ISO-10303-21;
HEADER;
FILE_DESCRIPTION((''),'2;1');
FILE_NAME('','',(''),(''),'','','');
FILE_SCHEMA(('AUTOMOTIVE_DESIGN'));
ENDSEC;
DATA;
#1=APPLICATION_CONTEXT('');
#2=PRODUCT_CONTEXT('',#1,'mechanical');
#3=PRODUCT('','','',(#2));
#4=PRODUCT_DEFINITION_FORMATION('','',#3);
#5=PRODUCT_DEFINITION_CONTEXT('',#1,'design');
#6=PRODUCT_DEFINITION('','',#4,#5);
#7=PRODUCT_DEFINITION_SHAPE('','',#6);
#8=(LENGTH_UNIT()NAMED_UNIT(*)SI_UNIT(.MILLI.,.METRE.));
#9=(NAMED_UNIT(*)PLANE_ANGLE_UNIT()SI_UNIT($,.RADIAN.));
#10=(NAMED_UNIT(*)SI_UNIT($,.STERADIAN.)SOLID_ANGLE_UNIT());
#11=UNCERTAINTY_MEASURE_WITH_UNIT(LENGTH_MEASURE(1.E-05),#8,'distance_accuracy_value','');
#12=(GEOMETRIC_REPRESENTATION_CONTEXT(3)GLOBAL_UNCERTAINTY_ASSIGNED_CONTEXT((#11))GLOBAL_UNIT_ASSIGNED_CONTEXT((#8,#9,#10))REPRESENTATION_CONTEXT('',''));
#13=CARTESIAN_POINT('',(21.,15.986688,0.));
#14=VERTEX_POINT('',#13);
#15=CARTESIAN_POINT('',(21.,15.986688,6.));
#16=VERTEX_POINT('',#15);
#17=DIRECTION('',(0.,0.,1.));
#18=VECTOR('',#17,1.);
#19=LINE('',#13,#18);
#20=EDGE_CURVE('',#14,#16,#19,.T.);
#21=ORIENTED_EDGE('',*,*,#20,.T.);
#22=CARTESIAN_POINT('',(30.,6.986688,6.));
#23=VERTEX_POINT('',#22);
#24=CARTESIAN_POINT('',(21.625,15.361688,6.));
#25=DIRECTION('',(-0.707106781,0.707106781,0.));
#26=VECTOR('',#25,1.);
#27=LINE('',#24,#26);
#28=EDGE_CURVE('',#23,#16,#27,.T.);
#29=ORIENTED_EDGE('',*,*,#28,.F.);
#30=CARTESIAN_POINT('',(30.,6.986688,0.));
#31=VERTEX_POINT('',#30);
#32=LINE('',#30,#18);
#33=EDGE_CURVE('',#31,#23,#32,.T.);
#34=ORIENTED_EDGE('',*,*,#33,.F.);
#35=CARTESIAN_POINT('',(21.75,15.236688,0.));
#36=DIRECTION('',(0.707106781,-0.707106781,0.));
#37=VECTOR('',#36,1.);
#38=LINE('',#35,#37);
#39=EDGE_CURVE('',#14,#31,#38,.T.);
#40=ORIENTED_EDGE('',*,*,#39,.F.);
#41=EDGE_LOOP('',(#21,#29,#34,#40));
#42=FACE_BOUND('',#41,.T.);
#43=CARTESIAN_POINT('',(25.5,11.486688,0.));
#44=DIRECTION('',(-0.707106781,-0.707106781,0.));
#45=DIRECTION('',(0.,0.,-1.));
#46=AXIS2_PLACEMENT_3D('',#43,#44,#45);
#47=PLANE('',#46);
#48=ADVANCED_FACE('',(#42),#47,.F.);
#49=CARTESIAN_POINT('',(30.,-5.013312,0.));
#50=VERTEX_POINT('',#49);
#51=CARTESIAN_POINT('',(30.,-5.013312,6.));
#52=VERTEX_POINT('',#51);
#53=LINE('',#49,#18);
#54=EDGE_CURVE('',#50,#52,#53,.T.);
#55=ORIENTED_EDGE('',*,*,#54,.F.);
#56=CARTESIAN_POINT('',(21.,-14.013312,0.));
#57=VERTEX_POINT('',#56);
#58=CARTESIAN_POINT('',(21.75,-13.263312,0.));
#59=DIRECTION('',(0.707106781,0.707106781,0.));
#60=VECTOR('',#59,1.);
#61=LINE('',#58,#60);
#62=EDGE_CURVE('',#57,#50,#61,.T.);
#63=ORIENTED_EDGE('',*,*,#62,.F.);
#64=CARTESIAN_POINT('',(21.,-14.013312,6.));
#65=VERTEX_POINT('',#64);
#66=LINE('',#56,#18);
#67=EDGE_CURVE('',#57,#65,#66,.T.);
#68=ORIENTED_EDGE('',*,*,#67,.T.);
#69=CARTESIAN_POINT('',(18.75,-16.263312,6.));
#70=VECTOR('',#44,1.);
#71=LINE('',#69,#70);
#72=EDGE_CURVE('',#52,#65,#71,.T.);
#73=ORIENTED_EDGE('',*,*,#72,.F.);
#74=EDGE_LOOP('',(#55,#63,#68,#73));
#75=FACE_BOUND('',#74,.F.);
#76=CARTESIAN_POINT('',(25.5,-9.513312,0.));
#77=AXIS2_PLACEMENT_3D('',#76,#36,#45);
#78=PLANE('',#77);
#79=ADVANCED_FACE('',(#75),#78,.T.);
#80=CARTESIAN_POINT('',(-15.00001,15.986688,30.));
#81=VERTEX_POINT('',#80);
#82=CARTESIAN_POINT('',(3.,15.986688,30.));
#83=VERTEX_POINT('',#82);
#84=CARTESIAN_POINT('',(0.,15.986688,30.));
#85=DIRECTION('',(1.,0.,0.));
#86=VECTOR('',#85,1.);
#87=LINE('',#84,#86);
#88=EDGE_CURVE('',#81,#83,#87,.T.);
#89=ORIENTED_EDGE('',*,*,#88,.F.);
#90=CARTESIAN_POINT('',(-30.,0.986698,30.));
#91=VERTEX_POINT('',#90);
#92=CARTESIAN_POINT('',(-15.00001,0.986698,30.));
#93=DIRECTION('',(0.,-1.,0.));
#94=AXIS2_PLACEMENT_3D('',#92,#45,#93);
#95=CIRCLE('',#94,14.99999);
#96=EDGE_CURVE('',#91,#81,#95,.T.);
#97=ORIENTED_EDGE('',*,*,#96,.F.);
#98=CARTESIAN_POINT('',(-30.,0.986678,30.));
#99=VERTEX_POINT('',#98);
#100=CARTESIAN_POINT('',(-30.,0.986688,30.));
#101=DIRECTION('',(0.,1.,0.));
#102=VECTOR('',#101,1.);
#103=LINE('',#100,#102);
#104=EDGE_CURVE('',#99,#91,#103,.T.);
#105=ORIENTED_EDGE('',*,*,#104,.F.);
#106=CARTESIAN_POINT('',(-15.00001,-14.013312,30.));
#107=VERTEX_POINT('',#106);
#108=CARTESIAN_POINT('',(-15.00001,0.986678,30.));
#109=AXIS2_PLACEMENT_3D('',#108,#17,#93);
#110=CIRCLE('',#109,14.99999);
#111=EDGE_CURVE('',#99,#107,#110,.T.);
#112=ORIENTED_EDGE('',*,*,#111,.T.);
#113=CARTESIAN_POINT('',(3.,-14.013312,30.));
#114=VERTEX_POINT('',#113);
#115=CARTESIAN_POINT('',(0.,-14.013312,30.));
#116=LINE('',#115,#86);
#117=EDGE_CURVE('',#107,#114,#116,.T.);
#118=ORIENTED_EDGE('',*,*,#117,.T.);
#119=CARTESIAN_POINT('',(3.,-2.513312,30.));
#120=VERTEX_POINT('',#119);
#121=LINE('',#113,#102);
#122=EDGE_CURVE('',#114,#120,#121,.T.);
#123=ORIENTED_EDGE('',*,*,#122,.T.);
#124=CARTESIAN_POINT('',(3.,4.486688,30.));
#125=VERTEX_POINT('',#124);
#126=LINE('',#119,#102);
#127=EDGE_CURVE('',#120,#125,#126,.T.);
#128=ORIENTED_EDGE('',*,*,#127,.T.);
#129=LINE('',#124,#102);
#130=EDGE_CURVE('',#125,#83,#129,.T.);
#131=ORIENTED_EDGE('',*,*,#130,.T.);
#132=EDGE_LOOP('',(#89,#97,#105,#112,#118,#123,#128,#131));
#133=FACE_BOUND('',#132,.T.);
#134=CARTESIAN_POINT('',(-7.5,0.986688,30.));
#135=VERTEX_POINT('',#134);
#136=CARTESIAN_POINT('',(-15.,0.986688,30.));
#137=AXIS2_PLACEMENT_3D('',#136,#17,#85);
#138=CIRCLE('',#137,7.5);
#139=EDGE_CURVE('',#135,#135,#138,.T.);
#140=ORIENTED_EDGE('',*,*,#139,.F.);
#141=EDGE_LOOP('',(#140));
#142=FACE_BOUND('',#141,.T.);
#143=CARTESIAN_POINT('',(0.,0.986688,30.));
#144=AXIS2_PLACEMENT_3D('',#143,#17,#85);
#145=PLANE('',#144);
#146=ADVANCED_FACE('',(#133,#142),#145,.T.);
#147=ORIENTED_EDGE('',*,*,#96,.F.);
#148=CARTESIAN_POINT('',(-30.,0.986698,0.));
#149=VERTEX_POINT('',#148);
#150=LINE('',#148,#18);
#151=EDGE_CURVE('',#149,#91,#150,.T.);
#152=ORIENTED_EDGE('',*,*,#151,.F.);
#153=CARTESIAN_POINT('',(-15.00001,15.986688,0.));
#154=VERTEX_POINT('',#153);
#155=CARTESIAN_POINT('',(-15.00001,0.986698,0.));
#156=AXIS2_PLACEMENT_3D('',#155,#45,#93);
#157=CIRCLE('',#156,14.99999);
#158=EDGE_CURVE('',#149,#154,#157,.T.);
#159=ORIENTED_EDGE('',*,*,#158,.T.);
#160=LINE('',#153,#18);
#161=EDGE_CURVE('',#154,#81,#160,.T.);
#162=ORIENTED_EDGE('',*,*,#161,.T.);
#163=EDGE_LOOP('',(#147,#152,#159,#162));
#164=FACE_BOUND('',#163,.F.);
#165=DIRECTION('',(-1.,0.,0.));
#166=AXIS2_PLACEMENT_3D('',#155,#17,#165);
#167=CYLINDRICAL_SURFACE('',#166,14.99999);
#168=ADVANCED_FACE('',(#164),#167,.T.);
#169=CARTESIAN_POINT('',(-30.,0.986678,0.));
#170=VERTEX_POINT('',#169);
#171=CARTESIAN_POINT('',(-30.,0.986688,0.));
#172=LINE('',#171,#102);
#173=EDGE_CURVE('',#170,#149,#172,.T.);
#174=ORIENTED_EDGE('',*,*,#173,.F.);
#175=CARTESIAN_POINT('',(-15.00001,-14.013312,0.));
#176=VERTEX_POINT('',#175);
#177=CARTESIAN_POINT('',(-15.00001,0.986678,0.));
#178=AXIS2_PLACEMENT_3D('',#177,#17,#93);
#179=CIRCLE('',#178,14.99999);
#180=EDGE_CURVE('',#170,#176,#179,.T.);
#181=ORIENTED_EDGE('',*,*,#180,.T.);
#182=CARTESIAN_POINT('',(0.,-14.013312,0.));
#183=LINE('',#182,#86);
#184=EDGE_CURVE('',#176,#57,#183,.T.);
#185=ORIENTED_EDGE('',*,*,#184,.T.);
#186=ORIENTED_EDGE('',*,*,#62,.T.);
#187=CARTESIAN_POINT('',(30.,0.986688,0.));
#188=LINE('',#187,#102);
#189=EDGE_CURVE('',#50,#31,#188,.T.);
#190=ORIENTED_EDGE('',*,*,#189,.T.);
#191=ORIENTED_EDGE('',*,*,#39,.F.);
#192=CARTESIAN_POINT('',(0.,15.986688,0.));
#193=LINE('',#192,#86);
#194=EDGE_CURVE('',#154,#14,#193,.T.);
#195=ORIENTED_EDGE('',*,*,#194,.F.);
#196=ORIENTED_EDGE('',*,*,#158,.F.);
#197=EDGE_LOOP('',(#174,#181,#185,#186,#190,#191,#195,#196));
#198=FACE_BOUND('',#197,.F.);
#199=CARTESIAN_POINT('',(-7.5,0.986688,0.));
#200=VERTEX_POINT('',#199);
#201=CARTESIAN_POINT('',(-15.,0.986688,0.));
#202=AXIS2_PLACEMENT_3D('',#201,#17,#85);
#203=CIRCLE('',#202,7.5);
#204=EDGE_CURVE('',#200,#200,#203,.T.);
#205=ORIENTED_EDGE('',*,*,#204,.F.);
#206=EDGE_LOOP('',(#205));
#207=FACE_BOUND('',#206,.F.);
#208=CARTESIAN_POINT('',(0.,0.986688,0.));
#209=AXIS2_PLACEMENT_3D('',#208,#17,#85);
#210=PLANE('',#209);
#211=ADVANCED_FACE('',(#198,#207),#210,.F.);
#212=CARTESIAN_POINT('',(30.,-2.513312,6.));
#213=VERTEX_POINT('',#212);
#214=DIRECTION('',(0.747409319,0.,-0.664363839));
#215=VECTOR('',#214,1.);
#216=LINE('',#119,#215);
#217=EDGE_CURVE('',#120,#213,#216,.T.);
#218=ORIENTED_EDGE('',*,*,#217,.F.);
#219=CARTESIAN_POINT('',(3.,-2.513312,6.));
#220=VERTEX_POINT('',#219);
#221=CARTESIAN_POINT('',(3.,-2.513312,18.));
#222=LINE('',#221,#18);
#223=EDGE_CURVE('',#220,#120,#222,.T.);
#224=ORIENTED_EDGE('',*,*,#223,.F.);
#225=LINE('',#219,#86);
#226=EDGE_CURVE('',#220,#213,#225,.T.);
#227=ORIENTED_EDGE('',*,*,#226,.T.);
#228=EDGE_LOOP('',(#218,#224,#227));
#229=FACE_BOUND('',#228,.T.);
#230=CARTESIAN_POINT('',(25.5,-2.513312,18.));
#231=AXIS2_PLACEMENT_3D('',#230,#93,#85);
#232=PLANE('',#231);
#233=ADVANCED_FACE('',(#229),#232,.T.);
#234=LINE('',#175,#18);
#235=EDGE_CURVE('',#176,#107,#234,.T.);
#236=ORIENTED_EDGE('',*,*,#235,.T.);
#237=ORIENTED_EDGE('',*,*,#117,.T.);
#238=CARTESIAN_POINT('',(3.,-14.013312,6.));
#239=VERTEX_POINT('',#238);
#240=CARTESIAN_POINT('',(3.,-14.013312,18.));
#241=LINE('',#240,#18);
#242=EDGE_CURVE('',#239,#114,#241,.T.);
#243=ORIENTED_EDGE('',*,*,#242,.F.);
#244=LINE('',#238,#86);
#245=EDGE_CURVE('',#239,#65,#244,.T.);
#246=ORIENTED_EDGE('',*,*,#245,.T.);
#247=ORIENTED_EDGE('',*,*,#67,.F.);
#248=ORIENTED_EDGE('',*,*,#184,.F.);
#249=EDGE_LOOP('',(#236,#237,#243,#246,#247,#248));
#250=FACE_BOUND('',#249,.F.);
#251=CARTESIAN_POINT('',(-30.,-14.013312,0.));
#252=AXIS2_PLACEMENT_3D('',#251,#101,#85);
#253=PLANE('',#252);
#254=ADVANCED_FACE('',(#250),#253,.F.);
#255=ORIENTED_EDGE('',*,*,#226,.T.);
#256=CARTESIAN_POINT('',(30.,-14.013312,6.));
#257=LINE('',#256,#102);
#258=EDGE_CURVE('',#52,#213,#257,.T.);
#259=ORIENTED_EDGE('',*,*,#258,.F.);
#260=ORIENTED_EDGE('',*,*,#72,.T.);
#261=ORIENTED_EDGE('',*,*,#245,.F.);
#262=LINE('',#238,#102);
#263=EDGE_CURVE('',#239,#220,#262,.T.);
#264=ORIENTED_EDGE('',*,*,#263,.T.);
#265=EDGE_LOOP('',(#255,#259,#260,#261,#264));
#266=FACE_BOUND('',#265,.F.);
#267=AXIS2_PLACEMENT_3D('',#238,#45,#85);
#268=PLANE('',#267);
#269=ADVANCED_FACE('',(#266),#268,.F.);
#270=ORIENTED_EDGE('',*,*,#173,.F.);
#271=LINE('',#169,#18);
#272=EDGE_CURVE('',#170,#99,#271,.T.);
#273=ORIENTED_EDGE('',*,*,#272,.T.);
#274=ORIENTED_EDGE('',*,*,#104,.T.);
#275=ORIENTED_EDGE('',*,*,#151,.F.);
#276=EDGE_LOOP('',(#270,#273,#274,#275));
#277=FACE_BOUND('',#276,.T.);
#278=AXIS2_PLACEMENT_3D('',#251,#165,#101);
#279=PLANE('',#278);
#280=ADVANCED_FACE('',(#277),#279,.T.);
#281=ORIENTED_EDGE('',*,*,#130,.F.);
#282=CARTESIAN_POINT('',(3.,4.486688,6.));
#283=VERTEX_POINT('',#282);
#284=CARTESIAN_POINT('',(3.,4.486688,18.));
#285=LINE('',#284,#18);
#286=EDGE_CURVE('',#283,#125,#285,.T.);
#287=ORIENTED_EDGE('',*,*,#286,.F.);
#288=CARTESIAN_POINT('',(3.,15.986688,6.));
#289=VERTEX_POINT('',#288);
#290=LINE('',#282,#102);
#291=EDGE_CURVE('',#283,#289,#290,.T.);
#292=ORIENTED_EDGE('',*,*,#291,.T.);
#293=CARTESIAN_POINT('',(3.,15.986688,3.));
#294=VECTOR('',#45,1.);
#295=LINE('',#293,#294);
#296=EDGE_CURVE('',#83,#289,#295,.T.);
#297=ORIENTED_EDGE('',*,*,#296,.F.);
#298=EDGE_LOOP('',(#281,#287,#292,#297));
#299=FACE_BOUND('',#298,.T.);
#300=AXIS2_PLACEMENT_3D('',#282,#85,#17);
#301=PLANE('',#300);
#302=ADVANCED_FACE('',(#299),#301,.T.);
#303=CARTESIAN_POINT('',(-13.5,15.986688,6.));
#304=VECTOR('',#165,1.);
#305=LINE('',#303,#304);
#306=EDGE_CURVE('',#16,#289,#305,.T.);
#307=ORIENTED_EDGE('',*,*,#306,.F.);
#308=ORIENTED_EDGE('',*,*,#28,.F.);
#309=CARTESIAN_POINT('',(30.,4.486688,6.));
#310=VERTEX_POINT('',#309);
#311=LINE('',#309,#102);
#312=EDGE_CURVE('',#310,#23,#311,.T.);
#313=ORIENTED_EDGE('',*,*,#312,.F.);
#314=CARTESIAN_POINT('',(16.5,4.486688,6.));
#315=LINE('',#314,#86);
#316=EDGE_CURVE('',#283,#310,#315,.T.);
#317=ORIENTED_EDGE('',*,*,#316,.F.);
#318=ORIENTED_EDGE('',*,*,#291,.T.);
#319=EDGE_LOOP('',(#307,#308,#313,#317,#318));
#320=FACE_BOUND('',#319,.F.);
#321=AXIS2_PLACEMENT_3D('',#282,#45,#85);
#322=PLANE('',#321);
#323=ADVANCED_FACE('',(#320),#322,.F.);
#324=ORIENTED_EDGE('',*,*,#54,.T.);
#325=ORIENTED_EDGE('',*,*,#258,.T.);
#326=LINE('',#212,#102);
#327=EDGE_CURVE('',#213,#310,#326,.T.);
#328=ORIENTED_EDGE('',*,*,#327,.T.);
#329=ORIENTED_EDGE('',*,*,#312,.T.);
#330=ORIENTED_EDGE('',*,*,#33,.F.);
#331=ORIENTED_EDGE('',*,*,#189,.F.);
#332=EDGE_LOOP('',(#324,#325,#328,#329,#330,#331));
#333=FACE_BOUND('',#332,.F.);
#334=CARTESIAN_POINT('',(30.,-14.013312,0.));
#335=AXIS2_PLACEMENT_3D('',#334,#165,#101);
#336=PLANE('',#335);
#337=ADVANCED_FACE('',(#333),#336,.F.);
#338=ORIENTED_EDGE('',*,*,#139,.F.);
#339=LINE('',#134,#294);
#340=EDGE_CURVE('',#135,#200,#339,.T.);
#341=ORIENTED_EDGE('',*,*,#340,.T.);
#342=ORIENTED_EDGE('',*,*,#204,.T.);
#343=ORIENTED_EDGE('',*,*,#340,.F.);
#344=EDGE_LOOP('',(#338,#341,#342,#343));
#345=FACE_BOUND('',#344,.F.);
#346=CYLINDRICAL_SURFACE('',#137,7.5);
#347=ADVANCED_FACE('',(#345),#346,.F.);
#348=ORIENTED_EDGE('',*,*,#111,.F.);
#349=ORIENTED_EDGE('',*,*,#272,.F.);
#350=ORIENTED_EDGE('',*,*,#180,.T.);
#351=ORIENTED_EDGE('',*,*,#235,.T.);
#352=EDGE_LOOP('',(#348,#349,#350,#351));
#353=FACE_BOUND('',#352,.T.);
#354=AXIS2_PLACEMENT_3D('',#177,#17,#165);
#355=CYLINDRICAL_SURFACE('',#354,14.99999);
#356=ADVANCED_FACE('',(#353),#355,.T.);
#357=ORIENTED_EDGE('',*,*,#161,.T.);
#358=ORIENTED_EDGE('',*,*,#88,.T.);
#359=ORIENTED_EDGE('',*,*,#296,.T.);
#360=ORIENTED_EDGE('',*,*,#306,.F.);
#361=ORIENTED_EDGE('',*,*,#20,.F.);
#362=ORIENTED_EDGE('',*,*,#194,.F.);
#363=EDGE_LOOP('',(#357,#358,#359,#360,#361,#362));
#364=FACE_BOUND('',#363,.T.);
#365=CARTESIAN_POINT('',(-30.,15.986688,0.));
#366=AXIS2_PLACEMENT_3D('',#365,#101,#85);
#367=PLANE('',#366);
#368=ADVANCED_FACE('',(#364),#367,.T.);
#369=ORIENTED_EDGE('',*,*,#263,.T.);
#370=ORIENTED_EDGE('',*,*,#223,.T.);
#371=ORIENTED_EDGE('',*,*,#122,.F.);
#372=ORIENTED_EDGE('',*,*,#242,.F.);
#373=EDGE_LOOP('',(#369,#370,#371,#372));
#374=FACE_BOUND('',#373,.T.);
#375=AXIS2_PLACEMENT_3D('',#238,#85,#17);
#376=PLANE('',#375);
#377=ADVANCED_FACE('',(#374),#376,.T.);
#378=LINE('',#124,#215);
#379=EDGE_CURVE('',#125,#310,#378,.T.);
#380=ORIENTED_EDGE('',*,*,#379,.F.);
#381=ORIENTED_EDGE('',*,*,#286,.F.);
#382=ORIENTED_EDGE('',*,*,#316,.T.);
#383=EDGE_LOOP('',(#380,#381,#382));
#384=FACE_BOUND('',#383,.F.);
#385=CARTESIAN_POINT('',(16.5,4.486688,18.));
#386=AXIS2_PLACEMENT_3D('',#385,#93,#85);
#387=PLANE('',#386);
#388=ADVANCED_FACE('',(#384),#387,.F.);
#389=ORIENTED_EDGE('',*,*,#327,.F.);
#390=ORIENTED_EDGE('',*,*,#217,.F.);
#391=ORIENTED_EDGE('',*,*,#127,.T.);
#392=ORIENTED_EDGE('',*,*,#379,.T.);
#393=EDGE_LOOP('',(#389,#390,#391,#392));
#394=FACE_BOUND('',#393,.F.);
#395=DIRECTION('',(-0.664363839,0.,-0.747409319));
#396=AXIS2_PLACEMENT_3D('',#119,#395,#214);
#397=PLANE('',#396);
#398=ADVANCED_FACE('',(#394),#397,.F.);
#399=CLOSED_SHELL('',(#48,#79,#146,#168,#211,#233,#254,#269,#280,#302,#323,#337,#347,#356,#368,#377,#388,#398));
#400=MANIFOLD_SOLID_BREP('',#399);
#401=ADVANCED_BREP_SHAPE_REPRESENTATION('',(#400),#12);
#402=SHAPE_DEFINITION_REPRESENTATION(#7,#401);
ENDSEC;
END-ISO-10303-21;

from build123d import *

# Parameters (mm, degrees)
F0_W      = 60
F0_H      = 30
F1_DEPTH  = 30
F2_R      = 14.99999
F3_SIZE   = 9
F4_R      = 7.5
F5_DEPTH  = 30
F6_W      = 9
F6_H      = 24
F6_W_2    = 18
F7_DEPTH  = 11.5
F8_START  = -18.5
F6_W_3    = 27
F8_DEPTH  = 11.501
F10_DEPTH = 7


# Not quite as in the source:
# - a fillet or chamfer is up to 0.001 mm smaller than in the source, because OpenCascade refuses the exact size


with BuildPart() as f1:
    # F0 (on Top) → F1 (new body)
    with BuildSketch(Plane.XY):
        with Locations((0, 0.9866876062)):
            Rectangle(F0_W, F0_H)
    extrude(amount=F1_DEPTH)

    # F2 (radius 15 in the source; OpenCascade refuses exactly that, so slightly less here)
    f2_edges = [f1.edges().sort_by_distance(p)[0] for p in [
        (-30, -14.013312, 15),
        (-30, 15.986688, 15),
    ]]
    fillet(f2_edges, radius=F2_R)

    # F3
    f3_edges = [f1.edges().sort_by_distance(p)[0] for p in [
        (30, -14.013312, 15),
        (30, 15.986688, 15),
    ]]
    chamfer(f3_edges, length=F3_SIZE)

    # F4 (on face) → F5 (cut, through all)
    with BuildSketch(Plane.XY.offset(30)):
        with Locations((-15, 0.9866876062)):
            Circle(F4_R)
    extrude(amount=-F5_DEPTH, mode=Mode.SUBTRACT)

    # F6 (on face) → F7 (cut)
    with BuildSketch(Plane.XZ.offset(14.0133123938)):
        with Locations((25.5, 18)):
            Rectangle(F6_W, F6_H)
        with Locations((12, 18)):
            Rectangle(F6_W_2, F6_H)
    extrude(amount=-F7_DEPTH, mode=Mode.SUBTRACT)

    # F6 (on face) → F8 (cut)
    with BuildSketch(Plane.XZ.offset(14.0133123938).offset(F8_START)):
        with Locations((16.5, 18)):
            Rectangle(F6_W_3, F6_H)
    extrude(amount=-F8_DEPTH, mode=Mode.SUBTRACT)

    # F9 (on face) → F10 (cut, through all)
    with BuildSketch(Plane.XZ.offset(2.5133123938)):
        Polygon((3, 30), (30, 6), (30, 30), align=None)
    extrude(amount=-F10_DEPTH, mode=Mode.SUBTRACT)


solid = f1.part
